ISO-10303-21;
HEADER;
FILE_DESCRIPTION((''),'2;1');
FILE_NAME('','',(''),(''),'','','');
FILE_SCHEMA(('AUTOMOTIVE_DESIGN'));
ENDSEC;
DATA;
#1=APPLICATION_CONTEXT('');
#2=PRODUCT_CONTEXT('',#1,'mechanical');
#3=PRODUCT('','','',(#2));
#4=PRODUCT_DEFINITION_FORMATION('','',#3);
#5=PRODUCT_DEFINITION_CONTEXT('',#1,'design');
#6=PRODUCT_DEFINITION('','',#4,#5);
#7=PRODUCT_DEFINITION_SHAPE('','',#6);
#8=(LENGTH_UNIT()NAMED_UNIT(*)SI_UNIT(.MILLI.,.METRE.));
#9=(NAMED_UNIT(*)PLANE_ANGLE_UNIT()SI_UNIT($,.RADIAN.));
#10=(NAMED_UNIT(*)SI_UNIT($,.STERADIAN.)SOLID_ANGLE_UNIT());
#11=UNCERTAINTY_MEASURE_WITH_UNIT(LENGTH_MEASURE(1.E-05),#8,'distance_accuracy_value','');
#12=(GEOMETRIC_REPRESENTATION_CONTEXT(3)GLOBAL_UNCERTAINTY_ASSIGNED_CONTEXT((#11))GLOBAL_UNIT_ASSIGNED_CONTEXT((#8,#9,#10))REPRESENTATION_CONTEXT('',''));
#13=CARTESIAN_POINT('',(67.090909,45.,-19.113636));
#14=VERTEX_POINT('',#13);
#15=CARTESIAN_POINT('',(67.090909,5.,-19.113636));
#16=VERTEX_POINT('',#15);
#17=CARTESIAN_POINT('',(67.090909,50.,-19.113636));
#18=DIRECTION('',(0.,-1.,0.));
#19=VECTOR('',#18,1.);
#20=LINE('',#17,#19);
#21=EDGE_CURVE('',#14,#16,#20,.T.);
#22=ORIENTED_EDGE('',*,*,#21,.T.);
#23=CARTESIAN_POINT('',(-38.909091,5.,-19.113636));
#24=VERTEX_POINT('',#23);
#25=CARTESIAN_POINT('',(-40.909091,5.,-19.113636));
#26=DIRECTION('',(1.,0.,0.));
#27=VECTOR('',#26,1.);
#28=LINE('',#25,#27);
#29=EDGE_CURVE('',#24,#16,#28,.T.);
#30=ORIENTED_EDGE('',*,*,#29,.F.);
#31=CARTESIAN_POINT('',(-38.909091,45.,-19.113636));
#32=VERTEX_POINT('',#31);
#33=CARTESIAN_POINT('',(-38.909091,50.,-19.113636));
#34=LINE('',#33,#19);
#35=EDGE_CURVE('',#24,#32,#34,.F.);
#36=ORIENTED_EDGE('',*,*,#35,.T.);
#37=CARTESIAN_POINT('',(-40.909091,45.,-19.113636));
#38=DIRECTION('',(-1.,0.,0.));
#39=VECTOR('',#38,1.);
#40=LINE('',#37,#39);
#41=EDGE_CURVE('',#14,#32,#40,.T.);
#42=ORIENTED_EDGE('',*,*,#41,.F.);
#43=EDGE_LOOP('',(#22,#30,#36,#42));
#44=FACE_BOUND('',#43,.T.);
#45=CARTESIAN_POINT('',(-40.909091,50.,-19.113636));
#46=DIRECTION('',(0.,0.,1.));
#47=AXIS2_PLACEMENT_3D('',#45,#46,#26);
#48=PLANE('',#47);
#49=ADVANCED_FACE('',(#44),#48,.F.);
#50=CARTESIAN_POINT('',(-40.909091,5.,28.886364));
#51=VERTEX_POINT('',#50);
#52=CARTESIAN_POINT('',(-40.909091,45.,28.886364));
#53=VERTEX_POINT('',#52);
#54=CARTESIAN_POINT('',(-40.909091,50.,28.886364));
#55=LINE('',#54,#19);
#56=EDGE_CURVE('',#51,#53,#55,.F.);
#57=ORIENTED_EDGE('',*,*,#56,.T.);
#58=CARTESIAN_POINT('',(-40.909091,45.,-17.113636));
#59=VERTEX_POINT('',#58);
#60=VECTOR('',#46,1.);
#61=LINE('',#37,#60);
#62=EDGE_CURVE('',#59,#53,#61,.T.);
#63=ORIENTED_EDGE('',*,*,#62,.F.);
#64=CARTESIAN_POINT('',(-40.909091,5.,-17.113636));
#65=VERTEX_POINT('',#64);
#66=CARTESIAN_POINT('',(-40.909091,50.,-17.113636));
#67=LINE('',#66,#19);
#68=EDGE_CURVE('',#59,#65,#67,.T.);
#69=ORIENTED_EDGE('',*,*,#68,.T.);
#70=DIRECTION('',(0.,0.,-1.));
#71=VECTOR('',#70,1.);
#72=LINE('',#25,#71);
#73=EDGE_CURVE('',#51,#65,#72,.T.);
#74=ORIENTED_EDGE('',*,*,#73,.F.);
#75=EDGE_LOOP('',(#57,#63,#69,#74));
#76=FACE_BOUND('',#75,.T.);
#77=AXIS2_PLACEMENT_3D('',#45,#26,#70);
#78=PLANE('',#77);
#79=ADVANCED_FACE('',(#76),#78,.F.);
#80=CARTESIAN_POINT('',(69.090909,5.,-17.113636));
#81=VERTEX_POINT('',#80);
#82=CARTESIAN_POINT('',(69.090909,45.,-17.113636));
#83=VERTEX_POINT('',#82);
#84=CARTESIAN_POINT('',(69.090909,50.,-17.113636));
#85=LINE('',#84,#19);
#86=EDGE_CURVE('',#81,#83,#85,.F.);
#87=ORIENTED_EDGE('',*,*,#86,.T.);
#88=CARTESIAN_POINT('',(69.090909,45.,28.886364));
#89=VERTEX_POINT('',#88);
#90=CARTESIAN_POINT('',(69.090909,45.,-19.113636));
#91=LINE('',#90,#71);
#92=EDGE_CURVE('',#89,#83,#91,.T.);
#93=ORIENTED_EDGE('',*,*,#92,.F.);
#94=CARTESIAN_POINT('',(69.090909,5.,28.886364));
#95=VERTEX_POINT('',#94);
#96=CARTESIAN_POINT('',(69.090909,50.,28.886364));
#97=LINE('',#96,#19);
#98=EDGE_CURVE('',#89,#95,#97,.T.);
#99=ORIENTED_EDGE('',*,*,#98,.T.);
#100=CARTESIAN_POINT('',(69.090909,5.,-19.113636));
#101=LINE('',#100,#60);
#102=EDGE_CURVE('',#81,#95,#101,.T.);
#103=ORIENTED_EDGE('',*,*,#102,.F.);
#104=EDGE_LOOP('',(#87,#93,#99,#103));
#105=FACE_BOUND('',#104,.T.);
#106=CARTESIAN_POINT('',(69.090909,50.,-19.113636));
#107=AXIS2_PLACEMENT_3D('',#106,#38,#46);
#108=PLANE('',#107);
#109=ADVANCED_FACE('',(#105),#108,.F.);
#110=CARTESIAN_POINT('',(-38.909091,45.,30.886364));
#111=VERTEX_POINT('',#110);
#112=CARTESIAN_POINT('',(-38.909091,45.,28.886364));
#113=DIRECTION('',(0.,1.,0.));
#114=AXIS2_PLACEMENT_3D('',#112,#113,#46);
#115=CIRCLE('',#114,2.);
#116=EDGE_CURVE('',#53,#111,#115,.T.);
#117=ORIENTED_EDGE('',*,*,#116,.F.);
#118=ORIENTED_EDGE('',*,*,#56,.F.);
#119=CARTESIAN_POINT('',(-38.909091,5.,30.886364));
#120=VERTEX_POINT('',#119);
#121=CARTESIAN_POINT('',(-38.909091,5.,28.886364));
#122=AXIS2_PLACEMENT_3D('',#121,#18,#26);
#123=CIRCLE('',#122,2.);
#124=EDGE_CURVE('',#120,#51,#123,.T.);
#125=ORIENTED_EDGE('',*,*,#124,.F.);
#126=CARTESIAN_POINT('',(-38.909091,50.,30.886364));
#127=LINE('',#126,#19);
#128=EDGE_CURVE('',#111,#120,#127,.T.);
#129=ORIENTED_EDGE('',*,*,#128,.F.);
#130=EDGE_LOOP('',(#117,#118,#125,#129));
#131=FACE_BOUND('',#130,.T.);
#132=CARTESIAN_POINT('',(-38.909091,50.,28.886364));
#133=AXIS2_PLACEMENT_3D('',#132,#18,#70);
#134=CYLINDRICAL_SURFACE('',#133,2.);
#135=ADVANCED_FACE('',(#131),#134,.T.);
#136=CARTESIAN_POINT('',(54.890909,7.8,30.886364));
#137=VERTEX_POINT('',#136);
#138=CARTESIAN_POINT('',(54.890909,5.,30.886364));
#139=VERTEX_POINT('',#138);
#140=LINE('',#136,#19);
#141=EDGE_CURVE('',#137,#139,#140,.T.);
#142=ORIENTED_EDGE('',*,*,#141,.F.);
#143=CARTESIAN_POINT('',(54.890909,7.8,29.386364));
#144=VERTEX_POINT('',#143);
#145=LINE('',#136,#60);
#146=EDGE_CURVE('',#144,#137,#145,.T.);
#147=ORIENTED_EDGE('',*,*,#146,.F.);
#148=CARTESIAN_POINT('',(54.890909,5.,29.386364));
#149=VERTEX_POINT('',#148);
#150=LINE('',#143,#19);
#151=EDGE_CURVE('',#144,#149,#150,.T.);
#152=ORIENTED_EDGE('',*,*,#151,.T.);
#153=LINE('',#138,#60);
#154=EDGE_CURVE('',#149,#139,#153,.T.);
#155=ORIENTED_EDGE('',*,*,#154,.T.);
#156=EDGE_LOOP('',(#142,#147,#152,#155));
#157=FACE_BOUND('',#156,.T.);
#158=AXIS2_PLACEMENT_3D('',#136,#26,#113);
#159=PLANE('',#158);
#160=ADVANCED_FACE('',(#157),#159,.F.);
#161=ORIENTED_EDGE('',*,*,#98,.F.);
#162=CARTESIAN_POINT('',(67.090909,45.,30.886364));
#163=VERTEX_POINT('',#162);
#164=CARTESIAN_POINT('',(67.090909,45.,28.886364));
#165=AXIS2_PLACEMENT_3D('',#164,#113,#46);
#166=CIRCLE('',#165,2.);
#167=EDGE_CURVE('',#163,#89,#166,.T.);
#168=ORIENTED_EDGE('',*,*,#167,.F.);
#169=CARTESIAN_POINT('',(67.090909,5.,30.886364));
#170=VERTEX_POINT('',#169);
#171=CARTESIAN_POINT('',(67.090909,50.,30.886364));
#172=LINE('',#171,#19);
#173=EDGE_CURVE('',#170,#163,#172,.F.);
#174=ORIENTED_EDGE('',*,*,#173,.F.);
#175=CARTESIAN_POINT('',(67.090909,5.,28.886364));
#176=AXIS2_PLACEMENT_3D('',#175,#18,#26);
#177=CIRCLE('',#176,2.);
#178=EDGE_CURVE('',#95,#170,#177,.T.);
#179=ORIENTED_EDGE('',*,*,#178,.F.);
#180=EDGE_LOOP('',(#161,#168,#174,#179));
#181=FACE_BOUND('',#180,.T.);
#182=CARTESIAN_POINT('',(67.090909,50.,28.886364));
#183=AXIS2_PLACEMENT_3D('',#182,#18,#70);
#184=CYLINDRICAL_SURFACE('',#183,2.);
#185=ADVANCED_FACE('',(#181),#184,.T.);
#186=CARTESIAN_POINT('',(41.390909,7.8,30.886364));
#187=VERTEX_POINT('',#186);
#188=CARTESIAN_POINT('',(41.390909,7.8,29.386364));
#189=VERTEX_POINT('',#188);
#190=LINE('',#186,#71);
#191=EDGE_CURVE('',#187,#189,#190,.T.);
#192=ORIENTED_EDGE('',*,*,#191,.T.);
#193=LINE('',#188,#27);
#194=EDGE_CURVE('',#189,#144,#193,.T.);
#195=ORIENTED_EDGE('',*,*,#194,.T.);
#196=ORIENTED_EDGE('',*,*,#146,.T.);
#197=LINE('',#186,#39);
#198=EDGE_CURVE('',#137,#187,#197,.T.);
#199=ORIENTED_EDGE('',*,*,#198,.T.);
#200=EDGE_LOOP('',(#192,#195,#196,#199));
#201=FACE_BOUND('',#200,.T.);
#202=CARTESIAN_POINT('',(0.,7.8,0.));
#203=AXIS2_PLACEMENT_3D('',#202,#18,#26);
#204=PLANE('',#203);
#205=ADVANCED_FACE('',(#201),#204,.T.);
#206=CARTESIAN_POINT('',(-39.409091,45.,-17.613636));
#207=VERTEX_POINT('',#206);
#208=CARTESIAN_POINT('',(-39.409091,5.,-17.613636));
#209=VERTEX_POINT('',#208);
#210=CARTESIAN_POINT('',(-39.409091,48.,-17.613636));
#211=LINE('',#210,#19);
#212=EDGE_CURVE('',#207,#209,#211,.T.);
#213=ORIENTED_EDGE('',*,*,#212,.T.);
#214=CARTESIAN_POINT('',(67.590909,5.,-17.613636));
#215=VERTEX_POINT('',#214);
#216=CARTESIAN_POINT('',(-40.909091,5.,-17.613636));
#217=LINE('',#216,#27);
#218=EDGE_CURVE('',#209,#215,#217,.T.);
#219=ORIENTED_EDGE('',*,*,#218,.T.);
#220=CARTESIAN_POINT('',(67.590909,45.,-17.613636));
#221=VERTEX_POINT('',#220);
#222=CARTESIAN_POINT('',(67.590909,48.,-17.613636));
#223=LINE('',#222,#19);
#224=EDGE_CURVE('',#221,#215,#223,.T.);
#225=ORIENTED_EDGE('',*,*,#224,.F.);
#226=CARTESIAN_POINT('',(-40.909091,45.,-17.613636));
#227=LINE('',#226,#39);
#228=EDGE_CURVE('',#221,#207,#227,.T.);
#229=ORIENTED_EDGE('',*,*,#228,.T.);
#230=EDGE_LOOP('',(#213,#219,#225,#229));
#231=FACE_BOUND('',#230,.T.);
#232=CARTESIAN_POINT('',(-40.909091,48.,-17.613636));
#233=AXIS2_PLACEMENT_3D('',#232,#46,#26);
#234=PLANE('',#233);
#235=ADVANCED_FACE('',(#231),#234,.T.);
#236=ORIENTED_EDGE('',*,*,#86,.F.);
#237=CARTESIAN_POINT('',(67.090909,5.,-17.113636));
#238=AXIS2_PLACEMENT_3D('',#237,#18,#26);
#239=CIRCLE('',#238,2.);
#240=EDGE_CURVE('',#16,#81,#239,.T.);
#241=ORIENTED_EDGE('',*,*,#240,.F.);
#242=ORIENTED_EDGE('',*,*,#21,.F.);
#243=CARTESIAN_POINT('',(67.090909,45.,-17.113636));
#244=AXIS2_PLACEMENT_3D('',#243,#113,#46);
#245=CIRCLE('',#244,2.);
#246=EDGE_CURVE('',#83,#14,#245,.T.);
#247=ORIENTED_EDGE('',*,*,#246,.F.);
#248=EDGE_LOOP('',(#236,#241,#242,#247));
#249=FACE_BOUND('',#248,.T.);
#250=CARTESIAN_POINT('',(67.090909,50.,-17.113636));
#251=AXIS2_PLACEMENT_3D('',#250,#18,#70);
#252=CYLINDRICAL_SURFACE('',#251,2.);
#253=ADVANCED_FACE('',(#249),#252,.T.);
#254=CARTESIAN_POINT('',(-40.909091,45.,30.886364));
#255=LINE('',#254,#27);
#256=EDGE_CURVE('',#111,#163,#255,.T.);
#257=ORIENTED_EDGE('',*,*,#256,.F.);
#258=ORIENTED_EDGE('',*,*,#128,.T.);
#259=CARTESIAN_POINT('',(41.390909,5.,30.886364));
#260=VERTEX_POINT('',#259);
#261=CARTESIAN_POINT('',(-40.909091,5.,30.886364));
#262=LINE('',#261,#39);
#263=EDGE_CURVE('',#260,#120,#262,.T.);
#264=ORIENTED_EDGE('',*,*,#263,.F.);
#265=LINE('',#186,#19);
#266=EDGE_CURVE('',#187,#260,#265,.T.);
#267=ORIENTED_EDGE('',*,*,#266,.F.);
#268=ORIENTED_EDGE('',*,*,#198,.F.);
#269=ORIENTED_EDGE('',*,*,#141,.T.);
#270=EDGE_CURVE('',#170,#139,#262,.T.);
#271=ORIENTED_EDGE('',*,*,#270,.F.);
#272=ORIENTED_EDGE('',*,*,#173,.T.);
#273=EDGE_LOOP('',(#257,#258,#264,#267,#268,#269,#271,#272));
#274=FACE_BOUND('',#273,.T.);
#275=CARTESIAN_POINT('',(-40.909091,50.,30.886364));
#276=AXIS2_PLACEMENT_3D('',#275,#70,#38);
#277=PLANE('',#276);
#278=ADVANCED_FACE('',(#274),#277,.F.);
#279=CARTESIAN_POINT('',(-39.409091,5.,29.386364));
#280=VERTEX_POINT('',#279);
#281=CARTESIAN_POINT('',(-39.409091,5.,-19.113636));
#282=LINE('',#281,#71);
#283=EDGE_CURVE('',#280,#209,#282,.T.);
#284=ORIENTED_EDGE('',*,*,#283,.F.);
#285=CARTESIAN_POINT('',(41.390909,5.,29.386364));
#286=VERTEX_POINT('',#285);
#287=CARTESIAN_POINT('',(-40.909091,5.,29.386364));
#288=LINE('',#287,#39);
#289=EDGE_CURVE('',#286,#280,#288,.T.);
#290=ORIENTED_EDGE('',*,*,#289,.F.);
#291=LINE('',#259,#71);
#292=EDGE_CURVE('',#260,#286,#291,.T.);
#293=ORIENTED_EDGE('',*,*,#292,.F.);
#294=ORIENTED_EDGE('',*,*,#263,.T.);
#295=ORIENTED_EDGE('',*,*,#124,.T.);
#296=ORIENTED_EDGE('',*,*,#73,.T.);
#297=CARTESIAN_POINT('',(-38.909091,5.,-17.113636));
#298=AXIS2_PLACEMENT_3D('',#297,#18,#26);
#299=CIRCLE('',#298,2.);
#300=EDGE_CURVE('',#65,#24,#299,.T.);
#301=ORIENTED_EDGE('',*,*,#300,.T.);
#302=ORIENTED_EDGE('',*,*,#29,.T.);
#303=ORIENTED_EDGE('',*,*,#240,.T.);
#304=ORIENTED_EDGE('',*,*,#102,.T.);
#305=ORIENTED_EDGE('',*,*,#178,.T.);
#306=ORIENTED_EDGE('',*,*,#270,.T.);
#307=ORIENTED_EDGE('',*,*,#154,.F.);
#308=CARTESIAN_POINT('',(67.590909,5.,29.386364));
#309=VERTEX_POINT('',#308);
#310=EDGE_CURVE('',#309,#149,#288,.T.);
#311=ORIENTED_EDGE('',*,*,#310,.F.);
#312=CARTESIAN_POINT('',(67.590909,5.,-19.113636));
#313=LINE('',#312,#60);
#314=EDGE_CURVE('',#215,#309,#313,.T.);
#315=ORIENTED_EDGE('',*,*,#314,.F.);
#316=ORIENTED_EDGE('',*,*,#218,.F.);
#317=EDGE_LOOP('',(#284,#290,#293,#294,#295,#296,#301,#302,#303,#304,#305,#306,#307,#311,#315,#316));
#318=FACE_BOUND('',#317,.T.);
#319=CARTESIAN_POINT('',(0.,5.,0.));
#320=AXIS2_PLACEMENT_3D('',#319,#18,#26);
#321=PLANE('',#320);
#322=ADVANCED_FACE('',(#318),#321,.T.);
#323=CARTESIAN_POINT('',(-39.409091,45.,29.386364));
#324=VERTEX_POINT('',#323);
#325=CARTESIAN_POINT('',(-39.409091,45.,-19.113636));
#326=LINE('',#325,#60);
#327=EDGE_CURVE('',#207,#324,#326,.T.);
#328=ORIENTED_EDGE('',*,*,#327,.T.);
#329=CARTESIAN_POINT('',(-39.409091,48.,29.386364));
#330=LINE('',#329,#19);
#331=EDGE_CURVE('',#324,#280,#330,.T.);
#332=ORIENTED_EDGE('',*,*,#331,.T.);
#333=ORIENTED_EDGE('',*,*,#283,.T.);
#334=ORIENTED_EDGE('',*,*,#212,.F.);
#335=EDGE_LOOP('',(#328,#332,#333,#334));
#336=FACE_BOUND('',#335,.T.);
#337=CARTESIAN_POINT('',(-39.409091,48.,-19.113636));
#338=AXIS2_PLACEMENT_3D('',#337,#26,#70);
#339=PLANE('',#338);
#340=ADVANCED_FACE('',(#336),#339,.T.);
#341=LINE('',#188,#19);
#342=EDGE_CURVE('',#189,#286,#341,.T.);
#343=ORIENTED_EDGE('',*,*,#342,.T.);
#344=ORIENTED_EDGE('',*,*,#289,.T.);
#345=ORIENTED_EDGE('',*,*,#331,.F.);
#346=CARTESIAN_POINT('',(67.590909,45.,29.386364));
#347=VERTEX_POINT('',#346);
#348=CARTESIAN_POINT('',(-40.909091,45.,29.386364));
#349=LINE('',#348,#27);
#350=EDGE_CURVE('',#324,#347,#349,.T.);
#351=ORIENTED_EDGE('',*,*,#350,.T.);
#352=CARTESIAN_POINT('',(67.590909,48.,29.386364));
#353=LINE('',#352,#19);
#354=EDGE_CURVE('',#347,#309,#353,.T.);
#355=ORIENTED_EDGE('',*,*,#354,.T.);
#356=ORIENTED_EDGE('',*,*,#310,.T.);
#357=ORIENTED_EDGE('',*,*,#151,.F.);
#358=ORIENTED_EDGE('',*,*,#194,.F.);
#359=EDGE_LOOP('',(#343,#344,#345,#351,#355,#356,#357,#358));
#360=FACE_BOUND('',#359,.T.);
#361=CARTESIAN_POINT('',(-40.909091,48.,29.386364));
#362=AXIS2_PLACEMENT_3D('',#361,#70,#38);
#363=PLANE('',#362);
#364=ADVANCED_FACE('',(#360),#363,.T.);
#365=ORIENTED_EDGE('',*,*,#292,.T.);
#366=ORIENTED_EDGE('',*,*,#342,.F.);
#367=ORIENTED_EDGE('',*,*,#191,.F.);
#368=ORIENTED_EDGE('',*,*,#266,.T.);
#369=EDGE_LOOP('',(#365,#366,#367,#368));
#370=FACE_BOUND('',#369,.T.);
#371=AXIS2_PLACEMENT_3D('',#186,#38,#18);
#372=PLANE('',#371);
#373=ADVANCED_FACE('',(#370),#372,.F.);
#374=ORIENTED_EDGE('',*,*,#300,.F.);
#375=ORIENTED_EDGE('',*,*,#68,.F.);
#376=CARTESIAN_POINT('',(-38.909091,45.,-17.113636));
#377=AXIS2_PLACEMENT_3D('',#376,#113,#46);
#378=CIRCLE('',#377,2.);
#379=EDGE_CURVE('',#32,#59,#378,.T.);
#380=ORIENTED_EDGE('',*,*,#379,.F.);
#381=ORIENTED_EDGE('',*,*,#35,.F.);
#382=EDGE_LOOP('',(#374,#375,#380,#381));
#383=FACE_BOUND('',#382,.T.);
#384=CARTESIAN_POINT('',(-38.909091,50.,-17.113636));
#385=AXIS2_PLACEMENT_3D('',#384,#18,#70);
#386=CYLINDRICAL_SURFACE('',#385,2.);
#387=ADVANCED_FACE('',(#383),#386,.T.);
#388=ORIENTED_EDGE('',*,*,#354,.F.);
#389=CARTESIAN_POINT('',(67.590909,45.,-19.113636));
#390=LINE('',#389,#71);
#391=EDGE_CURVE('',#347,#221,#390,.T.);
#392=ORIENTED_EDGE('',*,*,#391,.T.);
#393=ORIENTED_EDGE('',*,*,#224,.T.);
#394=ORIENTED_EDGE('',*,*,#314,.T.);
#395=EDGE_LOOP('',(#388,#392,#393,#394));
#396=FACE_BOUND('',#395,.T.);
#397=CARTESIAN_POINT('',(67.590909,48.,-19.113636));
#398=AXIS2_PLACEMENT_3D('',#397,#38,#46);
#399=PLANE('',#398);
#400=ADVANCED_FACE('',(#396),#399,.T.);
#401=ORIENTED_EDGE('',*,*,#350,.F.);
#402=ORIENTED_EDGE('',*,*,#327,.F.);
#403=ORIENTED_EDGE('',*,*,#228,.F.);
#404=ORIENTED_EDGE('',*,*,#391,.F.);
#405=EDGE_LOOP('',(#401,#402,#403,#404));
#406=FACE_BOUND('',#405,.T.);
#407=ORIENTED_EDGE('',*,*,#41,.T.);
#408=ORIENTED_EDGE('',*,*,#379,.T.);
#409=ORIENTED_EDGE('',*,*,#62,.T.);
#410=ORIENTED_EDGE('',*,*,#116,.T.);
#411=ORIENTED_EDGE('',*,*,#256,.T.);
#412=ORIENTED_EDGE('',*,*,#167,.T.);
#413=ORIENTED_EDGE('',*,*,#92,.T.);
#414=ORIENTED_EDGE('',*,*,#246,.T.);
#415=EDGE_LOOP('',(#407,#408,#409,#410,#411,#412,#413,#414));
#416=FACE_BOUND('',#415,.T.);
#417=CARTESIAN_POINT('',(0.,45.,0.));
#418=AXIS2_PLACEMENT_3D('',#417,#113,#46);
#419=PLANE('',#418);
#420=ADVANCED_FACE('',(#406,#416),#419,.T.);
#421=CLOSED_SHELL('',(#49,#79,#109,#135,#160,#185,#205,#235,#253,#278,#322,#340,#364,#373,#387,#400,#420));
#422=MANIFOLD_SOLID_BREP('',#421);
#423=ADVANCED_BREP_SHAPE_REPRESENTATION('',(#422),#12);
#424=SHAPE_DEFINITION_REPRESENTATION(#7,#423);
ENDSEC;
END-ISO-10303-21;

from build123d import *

# Parameters (mm, degrees)
STOCK_FULL_START               = 5
STOCK_FULL_SHAPE_1_OUTLINE_W   = 110
STOCK_FULL_SHAPE_1_OUTLINE_H   = 50
STOCK_FULL_SHAPE_1_OUTLINE_W_2 = 107
STOCK_FULL_SHAPE_1_OUTLINE_H_2 = 47
STOCK_FULL_SHAPE_1_DEPTH       = 40
FILLET1_R                      = 2
SKETCH3_W                      = 13.5
SKETCH3_H                      = 1.5
CUT_EXTRUDE1_DEPTH             = 2.8


# Read off the part's stored shape, not the designer's step: Stock-full shape-1
with BuildPart() as part:
    # Stock-full shape-1 outline → Stock-full shape-1 (new body)
    with BuildSketch(Plane(origin=(0, 0, 0), x_dir=(1, 0, 0), z_dir=(0, 1, 0)).offset(STOCK_FULL_START)):
        with Locations((14.090909091, -5.886363636)):
            Rectangle(STOCK_FULL_SHAPE_1_OUTLINE_W, STOCK_FULL_SHAPE_1_OUTLINE_H)
        with Locations((14.090909091, -5.886363636)):
            Rectangle(STOCK_FULL_SHAPE_1_OUTLINE_W_2, STOCK_FULL_SHAPE_1_OUTLINE_H_2, mode=Mode.SUBTRACT)
    extrude(amount=STOCK_FULL_SHAPE_1_DEPTH)

    # Fillet1
    fillet1_edges = [part.edges().sort_by_distance(p)[0] for p in [
        (-40.909090909, 25, -19.113636364),
        (69.090909091, 25, -19.113636364),
        (69.090909091, 25, 30.886363636),
        (-40.909090909, 25, 30.886363636),
    ]]
    fillet(fillet1_edges, radius=FILLET1_R)

    # Sketch3 → Cut-Extrude1 (cut)
    with BuildSketch(Plane.XZ.offset(-5)):
        with Locations((48.140909091, 30.136363636)):
            Rectangle(SKETCH3_W, SKETCH3_H)
    extrude(amount=-CUT_EXTRUDE1_DEPTH, mode=Mode.SUBTRACT)


solid = part.part
